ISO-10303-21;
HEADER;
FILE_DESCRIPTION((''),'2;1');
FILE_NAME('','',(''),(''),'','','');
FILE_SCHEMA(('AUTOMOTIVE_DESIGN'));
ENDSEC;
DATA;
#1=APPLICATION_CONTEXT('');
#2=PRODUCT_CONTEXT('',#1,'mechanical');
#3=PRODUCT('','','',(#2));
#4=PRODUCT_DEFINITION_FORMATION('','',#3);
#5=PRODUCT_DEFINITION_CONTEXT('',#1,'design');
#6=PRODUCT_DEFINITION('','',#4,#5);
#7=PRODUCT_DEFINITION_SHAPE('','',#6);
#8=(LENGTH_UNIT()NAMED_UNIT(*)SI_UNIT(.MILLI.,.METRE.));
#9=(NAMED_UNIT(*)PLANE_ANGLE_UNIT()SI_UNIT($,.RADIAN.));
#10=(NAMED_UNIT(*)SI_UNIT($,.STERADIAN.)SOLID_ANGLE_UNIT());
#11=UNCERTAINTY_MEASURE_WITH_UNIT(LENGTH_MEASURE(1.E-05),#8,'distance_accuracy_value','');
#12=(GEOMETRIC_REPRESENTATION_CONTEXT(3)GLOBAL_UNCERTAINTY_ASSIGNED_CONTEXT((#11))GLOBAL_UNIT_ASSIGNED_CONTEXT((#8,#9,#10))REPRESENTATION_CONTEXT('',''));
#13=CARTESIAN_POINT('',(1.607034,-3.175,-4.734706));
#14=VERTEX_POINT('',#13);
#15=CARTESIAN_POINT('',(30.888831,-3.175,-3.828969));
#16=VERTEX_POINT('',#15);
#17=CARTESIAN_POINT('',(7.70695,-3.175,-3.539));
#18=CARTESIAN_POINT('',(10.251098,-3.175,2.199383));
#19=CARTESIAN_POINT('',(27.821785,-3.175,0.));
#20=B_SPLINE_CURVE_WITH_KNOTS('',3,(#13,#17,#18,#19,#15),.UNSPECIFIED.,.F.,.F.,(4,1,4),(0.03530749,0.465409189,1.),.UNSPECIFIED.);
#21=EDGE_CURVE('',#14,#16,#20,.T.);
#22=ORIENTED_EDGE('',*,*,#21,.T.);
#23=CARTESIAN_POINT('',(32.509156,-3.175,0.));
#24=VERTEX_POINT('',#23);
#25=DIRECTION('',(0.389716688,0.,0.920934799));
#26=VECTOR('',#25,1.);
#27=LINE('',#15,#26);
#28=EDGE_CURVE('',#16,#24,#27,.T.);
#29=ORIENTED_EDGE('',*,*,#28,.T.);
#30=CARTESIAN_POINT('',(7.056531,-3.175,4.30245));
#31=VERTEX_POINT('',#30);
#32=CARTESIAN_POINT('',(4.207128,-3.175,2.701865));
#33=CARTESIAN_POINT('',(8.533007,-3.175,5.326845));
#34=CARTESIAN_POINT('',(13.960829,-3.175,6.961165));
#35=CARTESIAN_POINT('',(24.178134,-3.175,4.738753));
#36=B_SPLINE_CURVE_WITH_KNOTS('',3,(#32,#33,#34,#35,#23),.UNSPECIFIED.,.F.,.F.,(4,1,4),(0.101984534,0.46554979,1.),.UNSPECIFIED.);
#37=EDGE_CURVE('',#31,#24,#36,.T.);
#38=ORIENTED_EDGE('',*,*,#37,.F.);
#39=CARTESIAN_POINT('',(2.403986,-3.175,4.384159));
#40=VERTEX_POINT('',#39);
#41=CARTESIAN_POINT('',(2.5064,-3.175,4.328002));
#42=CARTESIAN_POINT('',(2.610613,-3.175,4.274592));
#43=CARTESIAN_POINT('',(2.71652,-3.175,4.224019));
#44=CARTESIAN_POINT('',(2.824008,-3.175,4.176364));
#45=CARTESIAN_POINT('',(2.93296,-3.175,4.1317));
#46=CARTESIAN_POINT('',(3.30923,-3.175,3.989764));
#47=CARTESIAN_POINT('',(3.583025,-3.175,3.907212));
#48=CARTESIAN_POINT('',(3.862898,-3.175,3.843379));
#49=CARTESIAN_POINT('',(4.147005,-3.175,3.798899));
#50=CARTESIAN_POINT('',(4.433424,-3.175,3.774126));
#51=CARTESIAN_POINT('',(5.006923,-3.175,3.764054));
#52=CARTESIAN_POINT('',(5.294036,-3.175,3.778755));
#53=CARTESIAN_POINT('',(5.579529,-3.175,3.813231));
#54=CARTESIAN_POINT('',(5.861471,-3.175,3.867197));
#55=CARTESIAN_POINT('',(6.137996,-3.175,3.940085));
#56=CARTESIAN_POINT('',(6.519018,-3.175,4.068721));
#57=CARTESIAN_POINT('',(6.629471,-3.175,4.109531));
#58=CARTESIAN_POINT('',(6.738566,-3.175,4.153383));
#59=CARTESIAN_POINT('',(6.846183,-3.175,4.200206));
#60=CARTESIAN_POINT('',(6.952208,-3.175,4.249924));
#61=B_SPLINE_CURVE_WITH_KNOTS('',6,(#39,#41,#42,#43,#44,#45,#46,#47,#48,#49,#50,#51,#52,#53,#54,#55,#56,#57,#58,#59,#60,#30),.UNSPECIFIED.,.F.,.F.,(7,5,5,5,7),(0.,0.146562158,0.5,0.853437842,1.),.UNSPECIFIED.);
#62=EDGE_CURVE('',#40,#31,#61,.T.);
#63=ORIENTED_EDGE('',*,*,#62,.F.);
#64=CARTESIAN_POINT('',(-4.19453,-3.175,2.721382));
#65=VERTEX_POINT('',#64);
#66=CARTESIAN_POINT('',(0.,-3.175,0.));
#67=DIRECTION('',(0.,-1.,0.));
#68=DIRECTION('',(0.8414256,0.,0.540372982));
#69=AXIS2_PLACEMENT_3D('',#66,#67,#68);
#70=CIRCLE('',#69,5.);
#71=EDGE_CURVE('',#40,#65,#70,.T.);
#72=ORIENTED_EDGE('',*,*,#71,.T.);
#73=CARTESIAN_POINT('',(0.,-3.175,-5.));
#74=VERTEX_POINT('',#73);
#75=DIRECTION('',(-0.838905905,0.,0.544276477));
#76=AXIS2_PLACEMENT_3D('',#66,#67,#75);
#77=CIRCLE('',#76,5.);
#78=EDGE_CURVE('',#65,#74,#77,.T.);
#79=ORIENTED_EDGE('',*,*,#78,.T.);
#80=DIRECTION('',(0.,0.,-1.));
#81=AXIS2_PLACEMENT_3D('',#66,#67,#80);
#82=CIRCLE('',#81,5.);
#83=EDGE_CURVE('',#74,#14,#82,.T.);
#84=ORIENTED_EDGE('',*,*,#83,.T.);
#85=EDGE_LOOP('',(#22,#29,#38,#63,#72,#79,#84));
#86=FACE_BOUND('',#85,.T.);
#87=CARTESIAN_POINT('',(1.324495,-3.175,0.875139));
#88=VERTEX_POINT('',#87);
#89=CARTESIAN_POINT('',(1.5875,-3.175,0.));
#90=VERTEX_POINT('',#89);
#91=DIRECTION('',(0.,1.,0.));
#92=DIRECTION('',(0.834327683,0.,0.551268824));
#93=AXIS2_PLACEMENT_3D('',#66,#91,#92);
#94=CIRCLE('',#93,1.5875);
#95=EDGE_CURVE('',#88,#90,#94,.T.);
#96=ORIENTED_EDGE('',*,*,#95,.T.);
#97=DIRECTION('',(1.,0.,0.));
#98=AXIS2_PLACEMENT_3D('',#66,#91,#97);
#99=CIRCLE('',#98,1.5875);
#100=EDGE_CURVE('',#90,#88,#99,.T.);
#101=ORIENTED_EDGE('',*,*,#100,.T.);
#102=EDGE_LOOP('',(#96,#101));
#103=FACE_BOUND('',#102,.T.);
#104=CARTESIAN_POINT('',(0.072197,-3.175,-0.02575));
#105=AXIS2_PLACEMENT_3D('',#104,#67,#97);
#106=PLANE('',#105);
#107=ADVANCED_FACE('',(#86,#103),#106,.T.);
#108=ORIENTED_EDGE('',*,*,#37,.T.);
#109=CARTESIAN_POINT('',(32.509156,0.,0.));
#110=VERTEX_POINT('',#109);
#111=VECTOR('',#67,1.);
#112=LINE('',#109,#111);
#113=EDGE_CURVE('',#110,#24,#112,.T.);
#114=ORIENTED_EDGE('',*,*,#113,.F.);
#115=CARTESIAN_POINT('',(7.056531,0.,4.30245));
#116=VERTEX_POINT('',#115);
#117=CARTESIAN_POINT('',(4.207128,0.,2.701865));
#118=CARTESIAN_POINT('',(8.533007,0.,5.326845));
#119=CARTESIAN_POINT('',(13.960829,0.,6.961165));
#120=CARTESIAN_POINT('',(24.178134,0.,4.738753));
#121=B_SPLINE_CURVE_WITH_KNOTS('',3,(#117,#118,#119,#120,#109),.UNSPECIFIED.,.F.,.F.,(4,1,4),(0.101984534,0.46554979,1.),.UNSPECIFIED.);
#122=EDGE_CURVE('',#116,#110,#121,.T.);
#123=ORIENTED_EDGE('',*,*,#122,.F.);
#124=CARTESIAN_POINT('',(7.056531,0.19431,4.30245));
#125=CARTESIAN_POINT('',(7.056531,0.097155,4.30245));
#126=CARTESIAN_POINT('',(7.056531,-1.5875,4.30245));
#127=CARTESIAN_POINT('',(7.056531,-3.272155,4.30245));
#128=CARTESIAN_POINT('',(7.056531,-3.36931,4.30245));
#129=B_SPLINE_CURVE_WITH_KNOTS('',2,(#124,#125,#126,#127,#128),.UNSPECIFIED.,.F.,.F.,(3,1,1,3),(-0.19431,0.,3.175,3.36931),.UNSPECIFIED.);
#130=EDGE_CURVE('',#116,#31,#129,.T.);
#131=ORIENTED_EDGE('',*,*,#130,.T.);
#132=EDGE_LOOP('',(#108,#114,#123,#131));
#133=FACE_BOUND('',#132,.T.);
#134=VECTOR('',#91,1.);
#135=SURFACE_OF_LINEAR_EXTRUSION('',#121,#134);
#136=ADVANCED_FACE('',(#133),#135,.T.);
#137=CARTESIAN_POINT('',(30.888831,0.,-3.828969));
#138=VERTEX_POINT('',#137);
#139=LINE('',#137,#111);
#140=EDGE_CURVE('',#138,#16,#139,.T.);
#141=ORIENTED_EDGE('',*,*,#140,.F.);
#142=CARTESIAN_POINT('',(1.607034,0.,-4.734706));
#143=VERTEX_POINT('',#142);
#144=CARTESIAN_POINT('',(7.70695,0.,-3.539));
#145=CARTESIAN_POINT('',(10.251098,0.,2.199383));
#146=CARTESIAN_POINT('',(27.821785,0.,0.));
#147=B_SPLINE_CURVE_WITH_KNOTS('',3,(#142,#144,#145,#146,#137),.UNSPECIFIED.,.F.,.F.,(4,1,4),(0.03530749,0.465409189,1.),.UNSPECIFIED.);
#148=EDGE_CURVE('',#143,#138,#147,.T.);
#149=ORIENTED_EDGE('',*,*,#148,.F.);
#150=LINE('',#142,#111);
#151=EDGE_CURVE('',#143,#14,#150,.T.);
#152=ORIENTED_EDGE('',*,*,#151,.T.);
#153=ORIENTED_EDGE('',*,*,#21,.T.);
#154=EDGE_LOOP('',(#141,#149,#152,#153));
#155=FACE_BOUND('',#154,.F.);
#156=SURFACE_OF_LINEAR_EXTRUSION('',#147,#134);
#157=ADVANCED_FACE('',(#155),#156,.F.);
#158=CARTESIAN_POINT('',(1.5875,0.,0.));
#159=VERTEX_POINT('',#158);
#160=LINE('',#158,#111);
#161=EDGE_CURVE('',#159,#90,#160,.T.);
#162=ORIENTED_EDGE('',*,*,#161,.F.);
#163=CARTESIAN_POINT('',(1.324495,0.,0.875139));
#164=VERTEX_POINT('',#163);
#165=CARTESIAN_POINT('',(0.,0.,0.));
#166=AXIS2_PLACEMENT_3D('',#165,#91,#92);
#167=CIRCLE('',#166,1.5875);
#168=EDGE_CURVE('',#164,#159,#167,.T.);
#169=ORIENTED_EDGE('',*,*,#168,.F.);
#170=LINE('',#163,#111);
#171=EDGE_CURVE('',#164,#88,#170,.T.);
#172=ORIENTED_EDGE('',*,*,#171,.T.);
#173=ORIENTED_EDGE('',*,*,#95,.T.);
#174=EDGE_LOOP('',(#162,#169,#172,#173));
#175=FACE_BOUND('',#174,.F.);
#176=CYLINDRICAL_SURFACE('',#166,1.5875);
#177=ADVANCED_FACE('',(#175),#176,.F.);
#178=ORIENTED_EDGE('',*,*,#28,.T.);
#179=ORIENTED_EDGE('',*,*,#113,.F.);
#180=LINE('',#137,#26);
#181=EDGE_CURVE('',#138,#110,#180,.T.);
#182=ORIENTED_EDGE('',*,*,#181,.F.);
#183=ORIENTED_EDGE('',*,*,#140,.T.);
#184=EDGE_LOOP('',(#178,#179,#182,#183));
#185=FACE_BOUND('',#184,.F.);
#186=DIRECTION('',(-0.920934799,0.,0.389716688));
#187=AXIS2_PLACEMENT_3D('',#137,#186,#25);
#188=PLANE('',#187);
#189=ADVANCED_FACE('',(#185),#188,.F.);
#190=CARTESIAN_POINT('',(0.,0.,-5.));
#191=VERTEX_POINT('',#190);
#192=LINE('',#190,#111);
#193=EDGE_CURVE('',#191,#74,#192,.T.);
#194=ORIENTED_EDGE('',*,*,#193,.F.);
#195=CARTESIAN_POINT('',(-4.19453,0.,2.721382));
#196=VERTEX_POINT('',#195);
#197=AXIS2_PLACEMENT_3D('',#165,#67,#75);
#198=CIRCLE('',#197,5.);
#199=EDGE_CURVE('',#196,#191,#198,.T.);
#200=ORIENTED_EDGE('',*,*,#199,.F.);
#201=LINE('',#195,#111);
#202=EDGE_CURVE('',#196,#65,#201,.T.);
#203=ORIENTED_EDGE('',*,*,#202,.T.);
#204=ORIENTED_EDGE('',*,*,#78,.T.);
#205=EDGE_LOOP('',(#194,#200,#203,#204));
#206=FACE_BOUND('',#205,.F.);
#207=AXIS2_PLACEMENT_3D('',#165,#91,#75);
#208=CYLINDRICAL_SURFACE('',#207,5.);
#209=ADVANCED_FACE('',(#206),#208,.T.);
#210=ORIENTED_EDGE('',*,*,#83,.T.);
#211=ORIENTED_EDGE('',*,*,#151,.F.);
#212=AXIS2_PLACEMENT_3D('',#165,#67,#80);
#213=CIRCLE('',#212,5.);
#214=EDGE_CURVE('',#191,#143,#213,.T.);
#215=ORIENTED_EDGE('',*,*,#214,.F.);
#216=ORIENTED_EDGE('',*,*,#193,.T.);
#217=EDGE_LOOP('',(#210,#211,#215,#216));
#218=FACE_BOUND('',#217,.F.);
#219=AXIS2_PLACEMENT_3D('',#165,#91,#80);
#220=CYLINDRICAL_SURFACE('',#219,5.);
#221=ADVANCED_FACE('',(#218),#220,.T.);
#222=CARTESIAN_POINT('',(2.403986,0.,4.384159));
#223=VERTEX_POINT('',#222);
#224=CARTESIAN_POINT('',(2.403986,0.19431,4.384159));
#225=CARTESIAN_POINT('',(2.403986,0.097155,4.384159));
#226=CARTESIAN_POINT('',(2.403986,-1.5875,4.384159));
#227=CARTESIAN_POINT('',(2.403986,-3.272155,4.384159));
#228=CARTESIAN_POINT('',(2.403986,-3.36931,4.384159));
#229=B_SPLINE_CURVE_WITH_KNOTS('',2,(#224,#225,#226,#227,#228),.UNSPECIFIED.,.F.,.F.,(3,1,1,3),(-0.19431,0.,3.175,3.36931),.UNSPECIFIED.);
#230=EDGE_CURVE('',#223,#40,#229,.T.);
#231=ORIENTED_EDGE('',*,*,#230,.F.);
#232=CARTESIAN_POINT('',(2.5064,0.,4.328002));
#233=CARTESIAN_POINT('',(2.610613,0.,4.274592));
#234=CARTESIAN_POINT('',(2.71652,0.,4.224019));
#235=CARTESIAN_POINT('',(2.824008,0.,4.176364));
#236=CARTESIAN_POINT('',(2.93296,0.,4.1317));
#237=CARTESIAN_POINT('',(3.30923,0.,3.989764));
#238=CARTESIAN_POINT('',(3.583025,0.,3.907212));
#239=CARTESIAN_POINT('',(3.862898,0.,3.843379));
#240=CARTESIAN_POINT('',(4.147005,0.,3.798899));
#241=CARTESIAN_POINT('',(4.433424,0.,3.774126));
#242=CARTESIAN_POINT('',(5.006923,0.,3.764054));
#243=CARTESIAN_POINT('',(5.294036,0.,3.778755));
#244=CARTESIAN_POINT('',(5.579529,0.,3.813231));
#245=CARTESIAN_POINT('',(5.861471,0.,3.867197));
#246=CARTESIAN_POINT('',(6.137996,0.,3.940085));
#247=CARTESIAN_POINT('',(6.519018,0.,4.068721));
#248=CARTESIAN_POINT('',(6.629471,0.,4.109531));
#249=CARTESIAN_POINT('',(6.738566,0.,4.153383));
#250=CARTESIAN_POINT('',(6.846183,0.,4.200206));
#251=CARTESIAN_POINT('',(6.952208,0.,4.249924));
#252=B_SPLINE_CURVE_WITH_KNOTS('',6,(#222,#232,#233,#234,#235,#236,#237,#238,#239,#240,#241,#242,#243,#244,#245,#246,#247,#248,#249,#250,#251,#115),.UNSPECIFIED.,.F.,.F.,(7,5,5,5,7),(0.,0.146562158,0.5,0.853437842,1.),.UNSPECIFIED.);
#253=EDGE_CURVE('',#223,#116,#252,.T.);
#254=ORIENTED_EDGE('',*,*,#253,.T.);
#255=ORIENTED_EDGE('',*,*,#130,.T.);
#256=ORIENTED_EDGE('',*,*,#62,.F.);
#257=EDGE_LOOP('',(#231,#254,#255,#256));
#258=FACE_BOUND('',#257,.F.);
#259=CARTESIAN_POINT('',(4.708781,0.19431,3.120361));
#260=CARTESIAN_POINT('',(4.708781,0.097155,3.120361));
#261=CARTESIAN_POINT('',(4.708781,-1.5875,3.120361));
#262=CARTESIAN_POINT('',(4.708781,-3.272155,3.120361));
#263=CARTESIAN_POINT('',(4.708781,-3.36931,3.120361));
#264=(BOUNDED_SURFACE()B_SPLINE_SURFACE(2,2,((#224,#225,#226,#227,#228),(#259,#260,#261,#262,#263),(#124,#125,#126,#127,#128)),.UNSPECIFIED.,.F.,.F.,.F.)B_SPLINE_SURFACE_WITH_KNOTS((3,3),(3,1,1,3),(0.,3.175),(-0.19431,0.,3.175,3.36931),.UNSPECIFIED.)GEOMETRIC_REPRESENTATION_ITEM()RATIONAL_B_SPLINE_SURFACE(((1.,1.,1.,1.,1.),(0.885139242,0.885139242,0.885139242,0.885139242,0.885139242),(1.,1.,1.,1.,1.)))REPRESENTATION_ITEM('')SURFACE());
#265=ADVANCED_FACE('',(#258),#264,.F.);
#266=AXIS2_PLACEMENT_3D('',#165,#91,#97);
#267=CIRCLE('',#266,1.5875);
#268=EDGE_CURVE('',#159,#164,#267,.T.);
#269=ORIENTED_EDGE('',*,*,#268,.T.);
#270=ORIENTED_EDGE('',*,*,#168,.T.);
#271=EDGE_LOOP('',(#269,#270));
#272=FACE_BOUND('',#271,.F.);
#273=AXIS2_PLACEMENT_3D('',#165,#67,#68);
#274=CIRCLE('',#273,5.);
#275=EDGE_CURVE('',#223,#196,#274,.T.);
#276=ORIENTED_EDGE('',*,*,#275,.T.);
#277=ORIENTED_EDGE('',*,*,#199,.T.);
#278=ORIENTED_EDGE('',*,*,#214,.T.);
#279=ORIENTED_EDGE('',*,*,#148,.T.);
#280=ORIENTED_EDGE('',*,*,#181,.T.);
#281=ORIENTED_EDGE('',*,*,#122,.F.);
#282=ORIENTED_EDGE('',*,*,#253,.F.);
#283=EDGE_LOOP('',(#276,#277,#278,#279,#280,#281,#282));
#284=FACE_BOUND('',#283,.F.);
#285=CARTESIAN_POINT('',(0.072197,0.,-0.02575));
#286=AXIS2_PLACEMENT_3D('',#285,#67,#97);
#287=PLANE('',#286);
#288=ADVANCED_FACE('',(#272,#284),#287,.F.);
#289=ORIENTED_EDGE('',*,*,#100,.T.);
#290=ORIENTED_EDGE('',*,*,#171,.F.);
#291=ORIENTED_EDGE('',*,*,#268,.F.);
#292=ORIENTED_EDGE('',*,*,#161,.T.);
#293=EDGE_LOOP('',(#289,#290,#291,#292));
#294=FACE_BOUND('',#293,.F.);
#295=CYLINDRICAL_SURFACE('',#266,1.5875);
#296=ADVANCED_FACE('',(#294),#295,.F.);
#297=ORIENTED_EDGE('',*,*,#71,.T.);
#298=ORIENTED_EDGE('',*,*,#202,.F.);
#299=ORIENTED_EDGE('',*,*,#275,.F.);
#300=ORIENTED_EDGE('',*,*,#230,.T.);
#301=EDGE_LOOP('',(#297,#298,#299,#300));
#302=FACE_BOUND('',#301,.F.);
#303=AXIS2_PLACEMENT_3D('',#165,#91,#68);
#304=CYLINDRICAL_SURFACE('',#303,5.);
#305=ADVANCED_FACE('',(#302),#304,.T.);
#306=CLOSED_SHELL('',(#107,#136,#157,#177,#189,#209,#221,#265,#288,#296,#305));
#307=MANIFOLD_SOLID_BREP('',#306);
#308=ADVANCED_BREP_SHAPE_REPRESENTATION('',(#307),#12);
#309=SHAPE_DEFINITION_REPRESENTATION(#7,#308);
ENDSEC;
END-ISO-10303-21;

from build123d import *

# Parameters (mm, degrees)
F1_DEPTH = 3.175
F2_R     = 5


# Not quite as in the source:
# - a length typed as a fraction of an inch, garbled in the dataset ("3 / 203.2 mm" for 3/8 in), is restored


with BuildPart() as f1:
    # F0 (on Front) → F1 (new body)
    with BuildSketch(Plane.XZ):
        with BuildLine():
            ThreePointArc((5, 0), (4.7976890268, 1.4078991449), (4.2071279991, 2.7018649113))
            ThreePointArc((4.2071279991, 2.7018649113), (0.0116152193, 4.9999865086), (-4.1945295238, 2.7213823829))
            ThreePointArc((-4.1945295238, 2.7213823829), (-4.3935698421, -2.3867433969), (0, -5))
            add(Edge.make_bspline(
                [(0, -5), (0.5720738613, -4.9218364583), (1.1062852924, -4.8328629446), (1.6070336906, -4.7347061912)],
                knots=[0, 0, 0, 0, 0.0353074902, 0.0353074902, 0.0353074902, 0.0353074902], degree=3))
            ThreePointArc((1.6070336906, -4.7347061912), (3.070488906, -3.9461497536), (4.1945295238, -2.7213823829))
            ThreePointArc((4.1945295238, -2.7213823829), (4.7944054699, -1.4190405881), (5, 0))
        make_face()
        with BuildLine():
            ThreePointArc((1.3244951977, 0.8751392582), (1.5203276582, 0.4569026831), (1.5875, 0))
            ThreePointArc((1.5875, 0), (-1.5203276582, -0.4569026831), (1.3244951977, 0.8751392582))
        make_face(mode=Mode.SUBTRACT)
        with BuildLine():
            add(Edge.make_bspline(
                [(4.2071279991, 2.7018649113), (8.5330066632, 5.3268453963), (13.9608292527, 6.9611647512), (24.1781340673, 4.7387528577), (32.5091555715, 0)],
                knots=[0.1019845344, 0.1019845344, 0.1019845344, 0.1019845344, 0.46554979, 1, 1, 1, 1], degree=3))
            ThreePointArc((4.2071279991, 2.7018649113), (4.7976890268, 1.4078991449), (5, 0))
            ThreePointArc((5, 0), (4.7944054699, -1.4190405881), (4.1945295238, -2.7213823829))
            ThreePointArc((4.1945295238, -2.7213823829), (3.070488906, -3.9461497536), (1.6070336906, -4.7347061912))
            add(Edge.make_bspline(
                [(1.6070336906, -4.7347061912), (7.7069500406, -3.5389999501), (10.2510979188, 2.1993831398), (27.8217853485, 0), (30.8888312429, -3.8289688528)],
                knots=[0.0353074902, 0.0353074902, 0.0353074902, 0.0353074902, 0.4654091895, 1, 1, 1, 1], degree=3))
            Line((30.8888312429, -3.8289688528), (32.5091555715, 0))
        make_face()
        with BuildLine():
            add(Edge.make_bspline(
                [(0, -5), (0.5720738613, -4.9218364583), (1.1062852924, -4.8328629446), (1.6070336906, -4.7347061912)],
                knots=[0, 0, 0, 0, 0.0353074902, 0.0353074902, 0.0353074902, 0.0353074902], degree=3))
            ThreePointArc((0, -5), (0.814392118, -4.9332307343), (1.6070336906, -4.7347061912))
        make_face()
    extrude(amount=F1_DEPTH)

    # F2
    f2_edges = [f1.edges().sort_by_distance(p)[0] for p in [
        (4.207128, -1.5875, 2.701865),
    ]]
    fillet(f2_edges, radius=F2_R)


solid = f1.part
